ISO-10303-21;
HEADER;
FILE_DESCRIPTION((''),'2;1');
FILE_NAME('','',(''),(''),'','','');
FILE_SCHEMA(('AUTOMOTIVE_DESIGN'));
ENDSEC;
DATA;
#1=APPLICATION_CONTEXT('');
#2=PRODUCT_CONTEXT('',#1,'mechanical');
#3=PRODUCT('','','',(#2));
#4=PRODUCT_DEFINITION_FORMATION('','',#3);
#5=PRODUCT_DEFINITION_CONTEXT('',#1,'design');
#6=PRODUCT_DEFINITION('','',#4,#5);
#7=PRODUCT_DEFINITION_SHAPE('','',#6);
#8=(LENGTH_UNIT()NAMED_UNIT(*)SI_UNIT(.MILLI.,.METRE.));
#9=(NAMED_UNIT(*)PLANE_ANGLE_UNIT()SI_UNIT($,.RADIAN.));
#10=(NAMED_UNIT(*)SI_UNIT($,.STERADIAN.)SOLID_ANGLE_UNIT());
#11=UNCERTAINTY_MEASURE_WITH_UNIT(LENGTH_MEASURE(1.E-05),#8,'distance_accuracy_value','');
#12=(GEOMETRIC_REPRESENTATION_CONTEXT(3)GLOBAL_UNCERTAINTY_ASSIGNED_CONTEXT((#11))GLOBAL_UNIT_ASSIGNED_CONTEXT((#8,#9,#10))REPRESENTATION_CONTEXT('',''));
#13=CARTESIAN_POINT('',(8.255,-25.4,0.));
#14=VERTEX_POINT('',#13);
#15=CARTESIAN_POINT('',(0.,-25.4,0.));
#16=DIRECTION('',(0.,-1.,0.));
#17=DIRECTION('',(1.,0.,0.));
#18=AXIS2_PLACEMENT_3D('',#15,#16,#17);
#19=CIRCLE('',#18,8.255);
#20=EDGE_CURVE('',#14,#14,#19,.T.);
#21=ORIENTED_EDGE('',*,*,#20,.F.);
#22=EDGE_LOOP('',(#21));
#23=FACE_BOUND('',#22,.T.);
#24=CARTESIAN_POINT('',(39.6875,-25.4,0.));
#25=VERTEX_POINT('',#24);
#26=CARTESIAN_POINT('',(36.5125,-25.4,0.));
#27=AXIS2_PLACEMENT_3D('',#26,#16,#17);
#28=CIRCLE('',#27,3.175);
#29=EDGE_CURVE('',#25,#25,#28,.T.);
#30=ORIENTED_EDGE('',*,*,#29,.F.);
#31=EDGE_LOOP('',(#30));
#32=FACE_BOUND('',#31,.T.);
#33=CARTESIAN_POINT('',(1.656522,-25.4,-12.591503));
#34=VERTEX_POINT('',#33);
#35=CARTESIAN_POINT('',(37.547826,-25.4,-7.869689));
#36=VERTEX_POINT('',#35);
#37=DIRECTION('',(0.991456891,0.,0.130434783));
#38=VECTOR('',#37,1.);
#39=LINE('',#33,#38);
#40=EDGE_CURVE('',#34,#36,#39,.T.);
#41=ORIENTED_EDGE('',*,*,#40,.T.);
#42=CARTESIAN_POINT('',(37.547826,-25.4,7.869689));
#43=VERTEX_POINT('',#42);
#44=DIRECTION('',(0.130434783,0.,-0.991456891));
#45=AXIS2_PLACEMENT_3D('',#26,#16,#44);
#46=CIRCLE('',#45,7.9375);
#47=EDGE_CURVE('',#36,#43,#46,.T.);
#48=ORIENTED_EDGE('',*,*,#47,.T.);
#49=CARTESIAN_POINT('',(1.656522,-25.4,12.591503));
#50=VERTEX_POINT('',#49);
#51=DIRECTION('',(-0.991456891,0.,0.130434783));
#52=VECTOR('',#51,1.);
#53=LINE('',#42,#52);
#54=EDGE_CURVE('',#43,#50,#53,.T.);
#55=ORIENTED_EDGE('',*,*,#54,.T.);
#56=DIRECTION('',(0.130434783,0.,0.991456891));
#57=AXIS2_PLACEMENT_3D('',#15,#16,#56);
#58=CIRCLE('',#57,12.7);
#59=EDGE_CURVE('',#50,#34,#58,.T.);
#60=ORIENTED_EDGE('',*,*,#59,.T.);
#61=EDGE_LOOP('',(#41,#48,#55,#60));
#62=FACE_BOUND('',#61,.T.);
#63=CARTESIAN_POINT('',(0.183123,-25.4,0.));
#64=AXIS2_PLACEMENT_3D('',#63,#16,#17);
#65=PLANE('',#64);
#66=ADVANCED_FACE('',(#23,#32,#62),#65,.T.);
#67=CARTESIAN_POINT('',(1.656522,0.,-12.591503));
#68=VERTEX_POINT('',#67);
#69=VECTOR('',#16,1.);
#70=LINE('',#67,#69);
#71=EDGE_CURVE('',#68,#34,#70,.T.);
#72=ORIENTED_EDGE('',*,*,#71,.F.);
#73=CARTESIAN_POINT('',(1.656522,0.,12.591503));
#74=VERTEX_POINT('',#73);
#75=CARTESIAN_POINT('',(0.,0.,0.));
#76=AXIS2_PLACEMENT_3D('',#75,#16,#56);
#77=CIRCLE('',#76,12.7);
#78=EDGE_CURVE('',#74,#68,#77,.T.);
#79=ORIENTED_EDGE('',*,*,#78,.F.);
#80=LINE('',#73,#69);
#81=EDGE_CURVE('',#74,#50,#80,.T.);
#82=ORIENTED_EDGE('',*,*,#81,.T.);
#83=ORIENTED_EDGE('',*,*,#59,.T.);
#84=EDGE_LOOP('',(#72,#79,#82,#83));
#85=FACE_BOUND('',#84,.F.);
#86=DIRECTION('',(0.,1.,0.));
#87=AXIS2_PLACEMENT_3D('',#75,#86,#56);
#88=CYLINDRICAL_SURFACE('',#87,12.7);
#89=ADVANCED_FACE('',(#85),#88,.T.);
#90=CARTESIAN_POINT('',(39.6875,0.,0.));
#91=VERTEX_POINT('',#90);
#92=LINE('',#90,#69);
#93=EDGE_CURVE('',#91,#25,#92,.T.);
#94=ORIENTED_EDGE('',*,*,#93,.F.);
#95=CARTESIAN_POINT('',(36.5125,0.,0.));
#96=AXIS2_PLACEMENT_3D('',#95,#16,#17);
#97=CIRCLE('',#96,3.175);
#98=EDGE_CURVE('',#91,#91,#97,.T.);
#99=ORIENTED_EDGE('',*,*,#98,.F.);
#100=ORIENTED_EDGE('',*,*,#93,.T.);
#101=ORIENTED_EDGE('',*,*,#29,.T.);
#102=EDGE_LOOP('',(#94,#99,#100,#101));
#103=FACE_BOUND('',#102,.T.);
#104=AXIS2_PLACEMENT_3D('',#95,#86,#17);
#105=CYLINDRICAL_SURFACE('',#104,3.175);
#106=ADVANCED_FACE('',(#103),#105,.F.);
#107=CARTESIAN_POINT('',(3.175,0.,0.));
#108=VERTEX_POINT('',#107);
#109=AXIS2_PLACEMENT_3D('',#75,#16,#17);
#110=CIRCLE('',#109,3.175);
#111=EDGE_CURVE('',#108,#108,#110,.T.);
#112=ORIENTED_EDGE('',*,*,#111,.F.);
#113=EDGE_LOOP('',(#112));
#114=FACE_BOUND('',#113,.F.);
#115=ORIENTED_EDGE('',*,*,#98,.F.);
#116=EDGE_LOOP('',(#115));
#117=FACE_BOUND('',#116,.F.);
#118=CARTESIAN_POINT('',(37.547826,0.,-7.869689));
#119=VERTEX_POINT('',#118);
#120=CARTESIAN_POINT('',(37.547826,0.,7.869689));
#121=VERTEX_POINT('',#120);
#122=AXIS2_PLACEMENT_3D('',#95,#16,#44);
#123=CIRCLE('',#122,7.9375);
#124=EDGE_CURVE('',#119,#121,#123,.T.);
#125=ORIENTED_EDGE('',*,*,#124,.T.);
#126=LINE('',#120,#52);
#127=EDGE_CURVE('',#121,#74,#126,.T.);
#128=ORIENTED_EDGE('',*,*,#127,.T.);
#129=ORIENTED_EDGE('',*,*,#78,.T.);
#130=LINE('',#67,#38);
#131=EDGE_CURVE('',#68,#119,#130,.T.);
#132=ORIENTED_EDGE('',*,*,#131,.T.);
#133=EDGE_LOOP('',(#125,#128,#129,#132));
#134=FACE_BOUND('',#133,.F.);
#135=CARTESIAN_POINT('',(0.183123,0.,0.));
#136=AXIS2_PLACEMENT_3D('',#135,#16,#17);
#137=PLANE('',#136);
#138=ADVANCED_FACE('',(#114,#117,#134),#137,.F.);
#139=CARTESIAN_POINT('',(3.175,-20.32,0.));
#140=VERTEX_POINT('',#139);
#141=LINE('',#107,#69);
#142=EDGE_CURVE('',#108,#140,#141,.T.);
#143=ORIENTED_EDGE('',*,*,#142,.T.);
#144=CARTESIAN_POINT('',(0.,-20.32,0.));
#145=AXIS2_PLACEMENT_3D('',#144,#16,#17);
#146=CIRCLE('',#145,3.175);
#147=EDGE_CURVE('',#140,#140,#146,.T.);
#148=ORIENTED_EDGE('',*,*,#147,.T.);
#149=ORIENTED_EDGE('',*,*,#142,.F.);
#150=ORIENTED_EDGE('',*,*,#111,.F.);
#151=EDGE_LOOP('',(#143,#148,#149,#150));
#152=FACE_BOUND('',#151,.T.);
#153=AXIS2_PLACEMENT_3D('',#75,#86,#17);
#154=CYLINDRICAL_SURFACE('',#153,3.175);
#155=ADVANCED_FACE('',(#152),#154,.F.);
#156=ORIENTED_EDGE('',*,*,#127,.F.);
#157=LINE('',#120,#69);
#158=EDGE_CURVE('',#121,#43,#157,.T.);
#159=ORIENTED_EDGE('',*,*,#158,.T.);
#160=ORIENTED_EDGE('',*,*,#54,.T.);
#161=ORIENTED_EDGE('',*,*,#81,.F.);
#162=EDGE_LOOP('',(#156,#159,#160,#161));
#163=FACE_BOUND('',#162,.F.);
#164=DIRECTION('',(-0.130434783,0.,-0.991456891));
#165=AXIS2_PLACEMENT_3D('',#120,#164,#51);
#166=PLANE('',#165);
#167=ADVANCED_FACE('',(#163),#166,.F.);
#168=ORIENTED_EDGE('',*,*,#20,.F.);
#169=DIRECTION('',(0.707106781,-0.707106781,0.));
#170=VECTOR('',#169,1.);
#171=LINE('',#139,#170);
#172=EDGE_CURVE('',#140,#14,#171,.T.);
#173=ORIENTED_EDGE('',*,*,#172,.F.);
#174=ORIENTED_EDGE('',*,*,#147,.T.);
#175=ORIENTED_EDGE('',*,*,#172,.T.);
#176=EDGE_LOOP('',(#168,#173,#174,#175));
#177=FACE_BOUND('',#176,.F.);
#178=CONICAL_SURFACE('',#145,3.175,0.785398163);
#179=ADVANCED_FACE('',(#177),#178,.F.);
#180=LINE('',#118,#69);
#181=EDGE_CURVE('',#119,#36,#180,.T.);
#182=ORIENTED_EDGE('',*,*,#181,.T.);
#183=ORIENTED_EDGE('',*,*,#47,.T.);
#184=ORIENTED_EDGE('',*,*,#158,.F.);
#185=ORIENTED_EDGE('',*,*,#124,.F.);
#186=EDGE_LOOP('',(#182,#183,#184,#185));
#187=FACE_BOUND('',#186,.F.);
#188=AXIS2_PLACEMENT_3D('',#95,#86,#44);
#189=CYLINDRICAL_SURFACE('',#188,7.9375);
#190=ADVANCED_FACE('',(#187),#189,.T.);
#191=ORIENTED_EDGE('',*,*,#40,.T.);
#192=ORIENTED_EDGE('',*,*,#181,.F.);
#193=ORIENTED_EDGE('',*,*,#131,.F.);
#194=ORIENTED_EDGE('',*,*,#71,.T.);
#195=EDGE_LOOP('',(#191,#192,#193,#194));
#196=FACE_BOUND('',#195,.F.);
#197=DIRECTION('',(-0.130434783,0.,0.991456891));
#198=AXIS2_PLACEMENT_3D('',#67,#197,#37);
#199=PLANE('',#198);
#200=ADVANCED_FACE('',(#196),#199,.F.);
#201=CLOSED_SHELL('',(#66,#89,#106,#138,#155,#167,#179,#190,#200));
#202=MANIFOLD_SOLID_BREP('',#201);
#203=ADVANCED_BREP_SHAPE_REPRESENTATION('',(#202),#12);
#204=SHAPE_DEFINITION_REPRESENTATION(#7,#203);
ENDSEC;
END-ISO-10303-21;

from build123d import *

# Parameters (mm, degrees)
F0_W     = 93.4863612056
F0_H     = 177.5486841798
F0_R     = 7.3874991458
F1_DEPTH = 25.4
F5_R     = 3.175
F6_DEPTH = 25.4
F7_SIZE  = 5.08


# Not quite as in the source:
# - a feature names something its author has since deleted; it is built from what else it names
# - the program builds the solid bodies; features that only make, move or delete a surface that nothing else refers to are left out


with BuildPart() as f1:
    # F0 (on Front) → F1 (new body)
    with BuildSketch(Plane.XZ):
        with Locations((0.2827197313, -1.319359988)):
            Rectangle(F0_W, F0_H)
        Circle(F0_R, mode=Mode.SUBTRACT)
    extrude(amount=F1_DEPTH)


with BuildPart() as f6:
    # F5 (on Front) → F6 (new body)
    with BuildSketch(Plane.XZ):
        with BuildLine():
            ThreePointArc((1.6565217391, -12.5915025207), (9.5479795268, -8.3741320121), (12.7, 0))
            ThreePointArc((12.7, 0), (9.5479795268, 8.3741320121), (1.6565217391, 12.5915025207))
            ThreePointArc((1.6565217391, 12.5915025207), (-12.7, 0), (1.6565217391, -12.5915025207))
        make_face()
        Circle(F5_R, mode=Mode.SUBTRACT)
        with BuildLine():
            ThreePointArc((1.6565217391, 12.5915025207), (9.5479795268, 8.3741320121), (12.7, 0))
            ThreePointArc((12.7, 0), (9.5479795268, -8.3741320121), (1.6565217391, -12.5915025207))
            Line((1.6565217391, -12.5915025207), (37.547826087, -7.8696890754))
            ThreePointArc((37.547826087, -7.8696890754), (28.575, 0), (37.547826087, 7.8696890754))
            Line((37.547826087, 7.8696890754), (1.6565217391, 12.5915025207))
        make_face()
        with BuildLine():
            ThreePointArc((44.45, 0), (42.4799872042, 5.2338325076), (37.547826087, 7.8696890754))
            ThreePointArc((37.547826087, 7.8696890754), (28.575, 0), (37.547826087, -7.8696890754))
            ThreePointArc((37.547826087, -7.8696890754), (42.4799872042, -5.2338325076), (44.45, 0))
        make_face()
        with Locations((36.5125, 0)):
            Circle(F5_R, mode=Mode.SUBTRACT)
    extrude(amount=F6_DEPTH)

    # F7
    f7_edges = [f6.edges().sort_by_distance(p)[0] for p in [
        (-3.175, -25.4, 0),
    ]]
    chamfer(f7_edges, length=F7_SIZE)


solid = f6.part
